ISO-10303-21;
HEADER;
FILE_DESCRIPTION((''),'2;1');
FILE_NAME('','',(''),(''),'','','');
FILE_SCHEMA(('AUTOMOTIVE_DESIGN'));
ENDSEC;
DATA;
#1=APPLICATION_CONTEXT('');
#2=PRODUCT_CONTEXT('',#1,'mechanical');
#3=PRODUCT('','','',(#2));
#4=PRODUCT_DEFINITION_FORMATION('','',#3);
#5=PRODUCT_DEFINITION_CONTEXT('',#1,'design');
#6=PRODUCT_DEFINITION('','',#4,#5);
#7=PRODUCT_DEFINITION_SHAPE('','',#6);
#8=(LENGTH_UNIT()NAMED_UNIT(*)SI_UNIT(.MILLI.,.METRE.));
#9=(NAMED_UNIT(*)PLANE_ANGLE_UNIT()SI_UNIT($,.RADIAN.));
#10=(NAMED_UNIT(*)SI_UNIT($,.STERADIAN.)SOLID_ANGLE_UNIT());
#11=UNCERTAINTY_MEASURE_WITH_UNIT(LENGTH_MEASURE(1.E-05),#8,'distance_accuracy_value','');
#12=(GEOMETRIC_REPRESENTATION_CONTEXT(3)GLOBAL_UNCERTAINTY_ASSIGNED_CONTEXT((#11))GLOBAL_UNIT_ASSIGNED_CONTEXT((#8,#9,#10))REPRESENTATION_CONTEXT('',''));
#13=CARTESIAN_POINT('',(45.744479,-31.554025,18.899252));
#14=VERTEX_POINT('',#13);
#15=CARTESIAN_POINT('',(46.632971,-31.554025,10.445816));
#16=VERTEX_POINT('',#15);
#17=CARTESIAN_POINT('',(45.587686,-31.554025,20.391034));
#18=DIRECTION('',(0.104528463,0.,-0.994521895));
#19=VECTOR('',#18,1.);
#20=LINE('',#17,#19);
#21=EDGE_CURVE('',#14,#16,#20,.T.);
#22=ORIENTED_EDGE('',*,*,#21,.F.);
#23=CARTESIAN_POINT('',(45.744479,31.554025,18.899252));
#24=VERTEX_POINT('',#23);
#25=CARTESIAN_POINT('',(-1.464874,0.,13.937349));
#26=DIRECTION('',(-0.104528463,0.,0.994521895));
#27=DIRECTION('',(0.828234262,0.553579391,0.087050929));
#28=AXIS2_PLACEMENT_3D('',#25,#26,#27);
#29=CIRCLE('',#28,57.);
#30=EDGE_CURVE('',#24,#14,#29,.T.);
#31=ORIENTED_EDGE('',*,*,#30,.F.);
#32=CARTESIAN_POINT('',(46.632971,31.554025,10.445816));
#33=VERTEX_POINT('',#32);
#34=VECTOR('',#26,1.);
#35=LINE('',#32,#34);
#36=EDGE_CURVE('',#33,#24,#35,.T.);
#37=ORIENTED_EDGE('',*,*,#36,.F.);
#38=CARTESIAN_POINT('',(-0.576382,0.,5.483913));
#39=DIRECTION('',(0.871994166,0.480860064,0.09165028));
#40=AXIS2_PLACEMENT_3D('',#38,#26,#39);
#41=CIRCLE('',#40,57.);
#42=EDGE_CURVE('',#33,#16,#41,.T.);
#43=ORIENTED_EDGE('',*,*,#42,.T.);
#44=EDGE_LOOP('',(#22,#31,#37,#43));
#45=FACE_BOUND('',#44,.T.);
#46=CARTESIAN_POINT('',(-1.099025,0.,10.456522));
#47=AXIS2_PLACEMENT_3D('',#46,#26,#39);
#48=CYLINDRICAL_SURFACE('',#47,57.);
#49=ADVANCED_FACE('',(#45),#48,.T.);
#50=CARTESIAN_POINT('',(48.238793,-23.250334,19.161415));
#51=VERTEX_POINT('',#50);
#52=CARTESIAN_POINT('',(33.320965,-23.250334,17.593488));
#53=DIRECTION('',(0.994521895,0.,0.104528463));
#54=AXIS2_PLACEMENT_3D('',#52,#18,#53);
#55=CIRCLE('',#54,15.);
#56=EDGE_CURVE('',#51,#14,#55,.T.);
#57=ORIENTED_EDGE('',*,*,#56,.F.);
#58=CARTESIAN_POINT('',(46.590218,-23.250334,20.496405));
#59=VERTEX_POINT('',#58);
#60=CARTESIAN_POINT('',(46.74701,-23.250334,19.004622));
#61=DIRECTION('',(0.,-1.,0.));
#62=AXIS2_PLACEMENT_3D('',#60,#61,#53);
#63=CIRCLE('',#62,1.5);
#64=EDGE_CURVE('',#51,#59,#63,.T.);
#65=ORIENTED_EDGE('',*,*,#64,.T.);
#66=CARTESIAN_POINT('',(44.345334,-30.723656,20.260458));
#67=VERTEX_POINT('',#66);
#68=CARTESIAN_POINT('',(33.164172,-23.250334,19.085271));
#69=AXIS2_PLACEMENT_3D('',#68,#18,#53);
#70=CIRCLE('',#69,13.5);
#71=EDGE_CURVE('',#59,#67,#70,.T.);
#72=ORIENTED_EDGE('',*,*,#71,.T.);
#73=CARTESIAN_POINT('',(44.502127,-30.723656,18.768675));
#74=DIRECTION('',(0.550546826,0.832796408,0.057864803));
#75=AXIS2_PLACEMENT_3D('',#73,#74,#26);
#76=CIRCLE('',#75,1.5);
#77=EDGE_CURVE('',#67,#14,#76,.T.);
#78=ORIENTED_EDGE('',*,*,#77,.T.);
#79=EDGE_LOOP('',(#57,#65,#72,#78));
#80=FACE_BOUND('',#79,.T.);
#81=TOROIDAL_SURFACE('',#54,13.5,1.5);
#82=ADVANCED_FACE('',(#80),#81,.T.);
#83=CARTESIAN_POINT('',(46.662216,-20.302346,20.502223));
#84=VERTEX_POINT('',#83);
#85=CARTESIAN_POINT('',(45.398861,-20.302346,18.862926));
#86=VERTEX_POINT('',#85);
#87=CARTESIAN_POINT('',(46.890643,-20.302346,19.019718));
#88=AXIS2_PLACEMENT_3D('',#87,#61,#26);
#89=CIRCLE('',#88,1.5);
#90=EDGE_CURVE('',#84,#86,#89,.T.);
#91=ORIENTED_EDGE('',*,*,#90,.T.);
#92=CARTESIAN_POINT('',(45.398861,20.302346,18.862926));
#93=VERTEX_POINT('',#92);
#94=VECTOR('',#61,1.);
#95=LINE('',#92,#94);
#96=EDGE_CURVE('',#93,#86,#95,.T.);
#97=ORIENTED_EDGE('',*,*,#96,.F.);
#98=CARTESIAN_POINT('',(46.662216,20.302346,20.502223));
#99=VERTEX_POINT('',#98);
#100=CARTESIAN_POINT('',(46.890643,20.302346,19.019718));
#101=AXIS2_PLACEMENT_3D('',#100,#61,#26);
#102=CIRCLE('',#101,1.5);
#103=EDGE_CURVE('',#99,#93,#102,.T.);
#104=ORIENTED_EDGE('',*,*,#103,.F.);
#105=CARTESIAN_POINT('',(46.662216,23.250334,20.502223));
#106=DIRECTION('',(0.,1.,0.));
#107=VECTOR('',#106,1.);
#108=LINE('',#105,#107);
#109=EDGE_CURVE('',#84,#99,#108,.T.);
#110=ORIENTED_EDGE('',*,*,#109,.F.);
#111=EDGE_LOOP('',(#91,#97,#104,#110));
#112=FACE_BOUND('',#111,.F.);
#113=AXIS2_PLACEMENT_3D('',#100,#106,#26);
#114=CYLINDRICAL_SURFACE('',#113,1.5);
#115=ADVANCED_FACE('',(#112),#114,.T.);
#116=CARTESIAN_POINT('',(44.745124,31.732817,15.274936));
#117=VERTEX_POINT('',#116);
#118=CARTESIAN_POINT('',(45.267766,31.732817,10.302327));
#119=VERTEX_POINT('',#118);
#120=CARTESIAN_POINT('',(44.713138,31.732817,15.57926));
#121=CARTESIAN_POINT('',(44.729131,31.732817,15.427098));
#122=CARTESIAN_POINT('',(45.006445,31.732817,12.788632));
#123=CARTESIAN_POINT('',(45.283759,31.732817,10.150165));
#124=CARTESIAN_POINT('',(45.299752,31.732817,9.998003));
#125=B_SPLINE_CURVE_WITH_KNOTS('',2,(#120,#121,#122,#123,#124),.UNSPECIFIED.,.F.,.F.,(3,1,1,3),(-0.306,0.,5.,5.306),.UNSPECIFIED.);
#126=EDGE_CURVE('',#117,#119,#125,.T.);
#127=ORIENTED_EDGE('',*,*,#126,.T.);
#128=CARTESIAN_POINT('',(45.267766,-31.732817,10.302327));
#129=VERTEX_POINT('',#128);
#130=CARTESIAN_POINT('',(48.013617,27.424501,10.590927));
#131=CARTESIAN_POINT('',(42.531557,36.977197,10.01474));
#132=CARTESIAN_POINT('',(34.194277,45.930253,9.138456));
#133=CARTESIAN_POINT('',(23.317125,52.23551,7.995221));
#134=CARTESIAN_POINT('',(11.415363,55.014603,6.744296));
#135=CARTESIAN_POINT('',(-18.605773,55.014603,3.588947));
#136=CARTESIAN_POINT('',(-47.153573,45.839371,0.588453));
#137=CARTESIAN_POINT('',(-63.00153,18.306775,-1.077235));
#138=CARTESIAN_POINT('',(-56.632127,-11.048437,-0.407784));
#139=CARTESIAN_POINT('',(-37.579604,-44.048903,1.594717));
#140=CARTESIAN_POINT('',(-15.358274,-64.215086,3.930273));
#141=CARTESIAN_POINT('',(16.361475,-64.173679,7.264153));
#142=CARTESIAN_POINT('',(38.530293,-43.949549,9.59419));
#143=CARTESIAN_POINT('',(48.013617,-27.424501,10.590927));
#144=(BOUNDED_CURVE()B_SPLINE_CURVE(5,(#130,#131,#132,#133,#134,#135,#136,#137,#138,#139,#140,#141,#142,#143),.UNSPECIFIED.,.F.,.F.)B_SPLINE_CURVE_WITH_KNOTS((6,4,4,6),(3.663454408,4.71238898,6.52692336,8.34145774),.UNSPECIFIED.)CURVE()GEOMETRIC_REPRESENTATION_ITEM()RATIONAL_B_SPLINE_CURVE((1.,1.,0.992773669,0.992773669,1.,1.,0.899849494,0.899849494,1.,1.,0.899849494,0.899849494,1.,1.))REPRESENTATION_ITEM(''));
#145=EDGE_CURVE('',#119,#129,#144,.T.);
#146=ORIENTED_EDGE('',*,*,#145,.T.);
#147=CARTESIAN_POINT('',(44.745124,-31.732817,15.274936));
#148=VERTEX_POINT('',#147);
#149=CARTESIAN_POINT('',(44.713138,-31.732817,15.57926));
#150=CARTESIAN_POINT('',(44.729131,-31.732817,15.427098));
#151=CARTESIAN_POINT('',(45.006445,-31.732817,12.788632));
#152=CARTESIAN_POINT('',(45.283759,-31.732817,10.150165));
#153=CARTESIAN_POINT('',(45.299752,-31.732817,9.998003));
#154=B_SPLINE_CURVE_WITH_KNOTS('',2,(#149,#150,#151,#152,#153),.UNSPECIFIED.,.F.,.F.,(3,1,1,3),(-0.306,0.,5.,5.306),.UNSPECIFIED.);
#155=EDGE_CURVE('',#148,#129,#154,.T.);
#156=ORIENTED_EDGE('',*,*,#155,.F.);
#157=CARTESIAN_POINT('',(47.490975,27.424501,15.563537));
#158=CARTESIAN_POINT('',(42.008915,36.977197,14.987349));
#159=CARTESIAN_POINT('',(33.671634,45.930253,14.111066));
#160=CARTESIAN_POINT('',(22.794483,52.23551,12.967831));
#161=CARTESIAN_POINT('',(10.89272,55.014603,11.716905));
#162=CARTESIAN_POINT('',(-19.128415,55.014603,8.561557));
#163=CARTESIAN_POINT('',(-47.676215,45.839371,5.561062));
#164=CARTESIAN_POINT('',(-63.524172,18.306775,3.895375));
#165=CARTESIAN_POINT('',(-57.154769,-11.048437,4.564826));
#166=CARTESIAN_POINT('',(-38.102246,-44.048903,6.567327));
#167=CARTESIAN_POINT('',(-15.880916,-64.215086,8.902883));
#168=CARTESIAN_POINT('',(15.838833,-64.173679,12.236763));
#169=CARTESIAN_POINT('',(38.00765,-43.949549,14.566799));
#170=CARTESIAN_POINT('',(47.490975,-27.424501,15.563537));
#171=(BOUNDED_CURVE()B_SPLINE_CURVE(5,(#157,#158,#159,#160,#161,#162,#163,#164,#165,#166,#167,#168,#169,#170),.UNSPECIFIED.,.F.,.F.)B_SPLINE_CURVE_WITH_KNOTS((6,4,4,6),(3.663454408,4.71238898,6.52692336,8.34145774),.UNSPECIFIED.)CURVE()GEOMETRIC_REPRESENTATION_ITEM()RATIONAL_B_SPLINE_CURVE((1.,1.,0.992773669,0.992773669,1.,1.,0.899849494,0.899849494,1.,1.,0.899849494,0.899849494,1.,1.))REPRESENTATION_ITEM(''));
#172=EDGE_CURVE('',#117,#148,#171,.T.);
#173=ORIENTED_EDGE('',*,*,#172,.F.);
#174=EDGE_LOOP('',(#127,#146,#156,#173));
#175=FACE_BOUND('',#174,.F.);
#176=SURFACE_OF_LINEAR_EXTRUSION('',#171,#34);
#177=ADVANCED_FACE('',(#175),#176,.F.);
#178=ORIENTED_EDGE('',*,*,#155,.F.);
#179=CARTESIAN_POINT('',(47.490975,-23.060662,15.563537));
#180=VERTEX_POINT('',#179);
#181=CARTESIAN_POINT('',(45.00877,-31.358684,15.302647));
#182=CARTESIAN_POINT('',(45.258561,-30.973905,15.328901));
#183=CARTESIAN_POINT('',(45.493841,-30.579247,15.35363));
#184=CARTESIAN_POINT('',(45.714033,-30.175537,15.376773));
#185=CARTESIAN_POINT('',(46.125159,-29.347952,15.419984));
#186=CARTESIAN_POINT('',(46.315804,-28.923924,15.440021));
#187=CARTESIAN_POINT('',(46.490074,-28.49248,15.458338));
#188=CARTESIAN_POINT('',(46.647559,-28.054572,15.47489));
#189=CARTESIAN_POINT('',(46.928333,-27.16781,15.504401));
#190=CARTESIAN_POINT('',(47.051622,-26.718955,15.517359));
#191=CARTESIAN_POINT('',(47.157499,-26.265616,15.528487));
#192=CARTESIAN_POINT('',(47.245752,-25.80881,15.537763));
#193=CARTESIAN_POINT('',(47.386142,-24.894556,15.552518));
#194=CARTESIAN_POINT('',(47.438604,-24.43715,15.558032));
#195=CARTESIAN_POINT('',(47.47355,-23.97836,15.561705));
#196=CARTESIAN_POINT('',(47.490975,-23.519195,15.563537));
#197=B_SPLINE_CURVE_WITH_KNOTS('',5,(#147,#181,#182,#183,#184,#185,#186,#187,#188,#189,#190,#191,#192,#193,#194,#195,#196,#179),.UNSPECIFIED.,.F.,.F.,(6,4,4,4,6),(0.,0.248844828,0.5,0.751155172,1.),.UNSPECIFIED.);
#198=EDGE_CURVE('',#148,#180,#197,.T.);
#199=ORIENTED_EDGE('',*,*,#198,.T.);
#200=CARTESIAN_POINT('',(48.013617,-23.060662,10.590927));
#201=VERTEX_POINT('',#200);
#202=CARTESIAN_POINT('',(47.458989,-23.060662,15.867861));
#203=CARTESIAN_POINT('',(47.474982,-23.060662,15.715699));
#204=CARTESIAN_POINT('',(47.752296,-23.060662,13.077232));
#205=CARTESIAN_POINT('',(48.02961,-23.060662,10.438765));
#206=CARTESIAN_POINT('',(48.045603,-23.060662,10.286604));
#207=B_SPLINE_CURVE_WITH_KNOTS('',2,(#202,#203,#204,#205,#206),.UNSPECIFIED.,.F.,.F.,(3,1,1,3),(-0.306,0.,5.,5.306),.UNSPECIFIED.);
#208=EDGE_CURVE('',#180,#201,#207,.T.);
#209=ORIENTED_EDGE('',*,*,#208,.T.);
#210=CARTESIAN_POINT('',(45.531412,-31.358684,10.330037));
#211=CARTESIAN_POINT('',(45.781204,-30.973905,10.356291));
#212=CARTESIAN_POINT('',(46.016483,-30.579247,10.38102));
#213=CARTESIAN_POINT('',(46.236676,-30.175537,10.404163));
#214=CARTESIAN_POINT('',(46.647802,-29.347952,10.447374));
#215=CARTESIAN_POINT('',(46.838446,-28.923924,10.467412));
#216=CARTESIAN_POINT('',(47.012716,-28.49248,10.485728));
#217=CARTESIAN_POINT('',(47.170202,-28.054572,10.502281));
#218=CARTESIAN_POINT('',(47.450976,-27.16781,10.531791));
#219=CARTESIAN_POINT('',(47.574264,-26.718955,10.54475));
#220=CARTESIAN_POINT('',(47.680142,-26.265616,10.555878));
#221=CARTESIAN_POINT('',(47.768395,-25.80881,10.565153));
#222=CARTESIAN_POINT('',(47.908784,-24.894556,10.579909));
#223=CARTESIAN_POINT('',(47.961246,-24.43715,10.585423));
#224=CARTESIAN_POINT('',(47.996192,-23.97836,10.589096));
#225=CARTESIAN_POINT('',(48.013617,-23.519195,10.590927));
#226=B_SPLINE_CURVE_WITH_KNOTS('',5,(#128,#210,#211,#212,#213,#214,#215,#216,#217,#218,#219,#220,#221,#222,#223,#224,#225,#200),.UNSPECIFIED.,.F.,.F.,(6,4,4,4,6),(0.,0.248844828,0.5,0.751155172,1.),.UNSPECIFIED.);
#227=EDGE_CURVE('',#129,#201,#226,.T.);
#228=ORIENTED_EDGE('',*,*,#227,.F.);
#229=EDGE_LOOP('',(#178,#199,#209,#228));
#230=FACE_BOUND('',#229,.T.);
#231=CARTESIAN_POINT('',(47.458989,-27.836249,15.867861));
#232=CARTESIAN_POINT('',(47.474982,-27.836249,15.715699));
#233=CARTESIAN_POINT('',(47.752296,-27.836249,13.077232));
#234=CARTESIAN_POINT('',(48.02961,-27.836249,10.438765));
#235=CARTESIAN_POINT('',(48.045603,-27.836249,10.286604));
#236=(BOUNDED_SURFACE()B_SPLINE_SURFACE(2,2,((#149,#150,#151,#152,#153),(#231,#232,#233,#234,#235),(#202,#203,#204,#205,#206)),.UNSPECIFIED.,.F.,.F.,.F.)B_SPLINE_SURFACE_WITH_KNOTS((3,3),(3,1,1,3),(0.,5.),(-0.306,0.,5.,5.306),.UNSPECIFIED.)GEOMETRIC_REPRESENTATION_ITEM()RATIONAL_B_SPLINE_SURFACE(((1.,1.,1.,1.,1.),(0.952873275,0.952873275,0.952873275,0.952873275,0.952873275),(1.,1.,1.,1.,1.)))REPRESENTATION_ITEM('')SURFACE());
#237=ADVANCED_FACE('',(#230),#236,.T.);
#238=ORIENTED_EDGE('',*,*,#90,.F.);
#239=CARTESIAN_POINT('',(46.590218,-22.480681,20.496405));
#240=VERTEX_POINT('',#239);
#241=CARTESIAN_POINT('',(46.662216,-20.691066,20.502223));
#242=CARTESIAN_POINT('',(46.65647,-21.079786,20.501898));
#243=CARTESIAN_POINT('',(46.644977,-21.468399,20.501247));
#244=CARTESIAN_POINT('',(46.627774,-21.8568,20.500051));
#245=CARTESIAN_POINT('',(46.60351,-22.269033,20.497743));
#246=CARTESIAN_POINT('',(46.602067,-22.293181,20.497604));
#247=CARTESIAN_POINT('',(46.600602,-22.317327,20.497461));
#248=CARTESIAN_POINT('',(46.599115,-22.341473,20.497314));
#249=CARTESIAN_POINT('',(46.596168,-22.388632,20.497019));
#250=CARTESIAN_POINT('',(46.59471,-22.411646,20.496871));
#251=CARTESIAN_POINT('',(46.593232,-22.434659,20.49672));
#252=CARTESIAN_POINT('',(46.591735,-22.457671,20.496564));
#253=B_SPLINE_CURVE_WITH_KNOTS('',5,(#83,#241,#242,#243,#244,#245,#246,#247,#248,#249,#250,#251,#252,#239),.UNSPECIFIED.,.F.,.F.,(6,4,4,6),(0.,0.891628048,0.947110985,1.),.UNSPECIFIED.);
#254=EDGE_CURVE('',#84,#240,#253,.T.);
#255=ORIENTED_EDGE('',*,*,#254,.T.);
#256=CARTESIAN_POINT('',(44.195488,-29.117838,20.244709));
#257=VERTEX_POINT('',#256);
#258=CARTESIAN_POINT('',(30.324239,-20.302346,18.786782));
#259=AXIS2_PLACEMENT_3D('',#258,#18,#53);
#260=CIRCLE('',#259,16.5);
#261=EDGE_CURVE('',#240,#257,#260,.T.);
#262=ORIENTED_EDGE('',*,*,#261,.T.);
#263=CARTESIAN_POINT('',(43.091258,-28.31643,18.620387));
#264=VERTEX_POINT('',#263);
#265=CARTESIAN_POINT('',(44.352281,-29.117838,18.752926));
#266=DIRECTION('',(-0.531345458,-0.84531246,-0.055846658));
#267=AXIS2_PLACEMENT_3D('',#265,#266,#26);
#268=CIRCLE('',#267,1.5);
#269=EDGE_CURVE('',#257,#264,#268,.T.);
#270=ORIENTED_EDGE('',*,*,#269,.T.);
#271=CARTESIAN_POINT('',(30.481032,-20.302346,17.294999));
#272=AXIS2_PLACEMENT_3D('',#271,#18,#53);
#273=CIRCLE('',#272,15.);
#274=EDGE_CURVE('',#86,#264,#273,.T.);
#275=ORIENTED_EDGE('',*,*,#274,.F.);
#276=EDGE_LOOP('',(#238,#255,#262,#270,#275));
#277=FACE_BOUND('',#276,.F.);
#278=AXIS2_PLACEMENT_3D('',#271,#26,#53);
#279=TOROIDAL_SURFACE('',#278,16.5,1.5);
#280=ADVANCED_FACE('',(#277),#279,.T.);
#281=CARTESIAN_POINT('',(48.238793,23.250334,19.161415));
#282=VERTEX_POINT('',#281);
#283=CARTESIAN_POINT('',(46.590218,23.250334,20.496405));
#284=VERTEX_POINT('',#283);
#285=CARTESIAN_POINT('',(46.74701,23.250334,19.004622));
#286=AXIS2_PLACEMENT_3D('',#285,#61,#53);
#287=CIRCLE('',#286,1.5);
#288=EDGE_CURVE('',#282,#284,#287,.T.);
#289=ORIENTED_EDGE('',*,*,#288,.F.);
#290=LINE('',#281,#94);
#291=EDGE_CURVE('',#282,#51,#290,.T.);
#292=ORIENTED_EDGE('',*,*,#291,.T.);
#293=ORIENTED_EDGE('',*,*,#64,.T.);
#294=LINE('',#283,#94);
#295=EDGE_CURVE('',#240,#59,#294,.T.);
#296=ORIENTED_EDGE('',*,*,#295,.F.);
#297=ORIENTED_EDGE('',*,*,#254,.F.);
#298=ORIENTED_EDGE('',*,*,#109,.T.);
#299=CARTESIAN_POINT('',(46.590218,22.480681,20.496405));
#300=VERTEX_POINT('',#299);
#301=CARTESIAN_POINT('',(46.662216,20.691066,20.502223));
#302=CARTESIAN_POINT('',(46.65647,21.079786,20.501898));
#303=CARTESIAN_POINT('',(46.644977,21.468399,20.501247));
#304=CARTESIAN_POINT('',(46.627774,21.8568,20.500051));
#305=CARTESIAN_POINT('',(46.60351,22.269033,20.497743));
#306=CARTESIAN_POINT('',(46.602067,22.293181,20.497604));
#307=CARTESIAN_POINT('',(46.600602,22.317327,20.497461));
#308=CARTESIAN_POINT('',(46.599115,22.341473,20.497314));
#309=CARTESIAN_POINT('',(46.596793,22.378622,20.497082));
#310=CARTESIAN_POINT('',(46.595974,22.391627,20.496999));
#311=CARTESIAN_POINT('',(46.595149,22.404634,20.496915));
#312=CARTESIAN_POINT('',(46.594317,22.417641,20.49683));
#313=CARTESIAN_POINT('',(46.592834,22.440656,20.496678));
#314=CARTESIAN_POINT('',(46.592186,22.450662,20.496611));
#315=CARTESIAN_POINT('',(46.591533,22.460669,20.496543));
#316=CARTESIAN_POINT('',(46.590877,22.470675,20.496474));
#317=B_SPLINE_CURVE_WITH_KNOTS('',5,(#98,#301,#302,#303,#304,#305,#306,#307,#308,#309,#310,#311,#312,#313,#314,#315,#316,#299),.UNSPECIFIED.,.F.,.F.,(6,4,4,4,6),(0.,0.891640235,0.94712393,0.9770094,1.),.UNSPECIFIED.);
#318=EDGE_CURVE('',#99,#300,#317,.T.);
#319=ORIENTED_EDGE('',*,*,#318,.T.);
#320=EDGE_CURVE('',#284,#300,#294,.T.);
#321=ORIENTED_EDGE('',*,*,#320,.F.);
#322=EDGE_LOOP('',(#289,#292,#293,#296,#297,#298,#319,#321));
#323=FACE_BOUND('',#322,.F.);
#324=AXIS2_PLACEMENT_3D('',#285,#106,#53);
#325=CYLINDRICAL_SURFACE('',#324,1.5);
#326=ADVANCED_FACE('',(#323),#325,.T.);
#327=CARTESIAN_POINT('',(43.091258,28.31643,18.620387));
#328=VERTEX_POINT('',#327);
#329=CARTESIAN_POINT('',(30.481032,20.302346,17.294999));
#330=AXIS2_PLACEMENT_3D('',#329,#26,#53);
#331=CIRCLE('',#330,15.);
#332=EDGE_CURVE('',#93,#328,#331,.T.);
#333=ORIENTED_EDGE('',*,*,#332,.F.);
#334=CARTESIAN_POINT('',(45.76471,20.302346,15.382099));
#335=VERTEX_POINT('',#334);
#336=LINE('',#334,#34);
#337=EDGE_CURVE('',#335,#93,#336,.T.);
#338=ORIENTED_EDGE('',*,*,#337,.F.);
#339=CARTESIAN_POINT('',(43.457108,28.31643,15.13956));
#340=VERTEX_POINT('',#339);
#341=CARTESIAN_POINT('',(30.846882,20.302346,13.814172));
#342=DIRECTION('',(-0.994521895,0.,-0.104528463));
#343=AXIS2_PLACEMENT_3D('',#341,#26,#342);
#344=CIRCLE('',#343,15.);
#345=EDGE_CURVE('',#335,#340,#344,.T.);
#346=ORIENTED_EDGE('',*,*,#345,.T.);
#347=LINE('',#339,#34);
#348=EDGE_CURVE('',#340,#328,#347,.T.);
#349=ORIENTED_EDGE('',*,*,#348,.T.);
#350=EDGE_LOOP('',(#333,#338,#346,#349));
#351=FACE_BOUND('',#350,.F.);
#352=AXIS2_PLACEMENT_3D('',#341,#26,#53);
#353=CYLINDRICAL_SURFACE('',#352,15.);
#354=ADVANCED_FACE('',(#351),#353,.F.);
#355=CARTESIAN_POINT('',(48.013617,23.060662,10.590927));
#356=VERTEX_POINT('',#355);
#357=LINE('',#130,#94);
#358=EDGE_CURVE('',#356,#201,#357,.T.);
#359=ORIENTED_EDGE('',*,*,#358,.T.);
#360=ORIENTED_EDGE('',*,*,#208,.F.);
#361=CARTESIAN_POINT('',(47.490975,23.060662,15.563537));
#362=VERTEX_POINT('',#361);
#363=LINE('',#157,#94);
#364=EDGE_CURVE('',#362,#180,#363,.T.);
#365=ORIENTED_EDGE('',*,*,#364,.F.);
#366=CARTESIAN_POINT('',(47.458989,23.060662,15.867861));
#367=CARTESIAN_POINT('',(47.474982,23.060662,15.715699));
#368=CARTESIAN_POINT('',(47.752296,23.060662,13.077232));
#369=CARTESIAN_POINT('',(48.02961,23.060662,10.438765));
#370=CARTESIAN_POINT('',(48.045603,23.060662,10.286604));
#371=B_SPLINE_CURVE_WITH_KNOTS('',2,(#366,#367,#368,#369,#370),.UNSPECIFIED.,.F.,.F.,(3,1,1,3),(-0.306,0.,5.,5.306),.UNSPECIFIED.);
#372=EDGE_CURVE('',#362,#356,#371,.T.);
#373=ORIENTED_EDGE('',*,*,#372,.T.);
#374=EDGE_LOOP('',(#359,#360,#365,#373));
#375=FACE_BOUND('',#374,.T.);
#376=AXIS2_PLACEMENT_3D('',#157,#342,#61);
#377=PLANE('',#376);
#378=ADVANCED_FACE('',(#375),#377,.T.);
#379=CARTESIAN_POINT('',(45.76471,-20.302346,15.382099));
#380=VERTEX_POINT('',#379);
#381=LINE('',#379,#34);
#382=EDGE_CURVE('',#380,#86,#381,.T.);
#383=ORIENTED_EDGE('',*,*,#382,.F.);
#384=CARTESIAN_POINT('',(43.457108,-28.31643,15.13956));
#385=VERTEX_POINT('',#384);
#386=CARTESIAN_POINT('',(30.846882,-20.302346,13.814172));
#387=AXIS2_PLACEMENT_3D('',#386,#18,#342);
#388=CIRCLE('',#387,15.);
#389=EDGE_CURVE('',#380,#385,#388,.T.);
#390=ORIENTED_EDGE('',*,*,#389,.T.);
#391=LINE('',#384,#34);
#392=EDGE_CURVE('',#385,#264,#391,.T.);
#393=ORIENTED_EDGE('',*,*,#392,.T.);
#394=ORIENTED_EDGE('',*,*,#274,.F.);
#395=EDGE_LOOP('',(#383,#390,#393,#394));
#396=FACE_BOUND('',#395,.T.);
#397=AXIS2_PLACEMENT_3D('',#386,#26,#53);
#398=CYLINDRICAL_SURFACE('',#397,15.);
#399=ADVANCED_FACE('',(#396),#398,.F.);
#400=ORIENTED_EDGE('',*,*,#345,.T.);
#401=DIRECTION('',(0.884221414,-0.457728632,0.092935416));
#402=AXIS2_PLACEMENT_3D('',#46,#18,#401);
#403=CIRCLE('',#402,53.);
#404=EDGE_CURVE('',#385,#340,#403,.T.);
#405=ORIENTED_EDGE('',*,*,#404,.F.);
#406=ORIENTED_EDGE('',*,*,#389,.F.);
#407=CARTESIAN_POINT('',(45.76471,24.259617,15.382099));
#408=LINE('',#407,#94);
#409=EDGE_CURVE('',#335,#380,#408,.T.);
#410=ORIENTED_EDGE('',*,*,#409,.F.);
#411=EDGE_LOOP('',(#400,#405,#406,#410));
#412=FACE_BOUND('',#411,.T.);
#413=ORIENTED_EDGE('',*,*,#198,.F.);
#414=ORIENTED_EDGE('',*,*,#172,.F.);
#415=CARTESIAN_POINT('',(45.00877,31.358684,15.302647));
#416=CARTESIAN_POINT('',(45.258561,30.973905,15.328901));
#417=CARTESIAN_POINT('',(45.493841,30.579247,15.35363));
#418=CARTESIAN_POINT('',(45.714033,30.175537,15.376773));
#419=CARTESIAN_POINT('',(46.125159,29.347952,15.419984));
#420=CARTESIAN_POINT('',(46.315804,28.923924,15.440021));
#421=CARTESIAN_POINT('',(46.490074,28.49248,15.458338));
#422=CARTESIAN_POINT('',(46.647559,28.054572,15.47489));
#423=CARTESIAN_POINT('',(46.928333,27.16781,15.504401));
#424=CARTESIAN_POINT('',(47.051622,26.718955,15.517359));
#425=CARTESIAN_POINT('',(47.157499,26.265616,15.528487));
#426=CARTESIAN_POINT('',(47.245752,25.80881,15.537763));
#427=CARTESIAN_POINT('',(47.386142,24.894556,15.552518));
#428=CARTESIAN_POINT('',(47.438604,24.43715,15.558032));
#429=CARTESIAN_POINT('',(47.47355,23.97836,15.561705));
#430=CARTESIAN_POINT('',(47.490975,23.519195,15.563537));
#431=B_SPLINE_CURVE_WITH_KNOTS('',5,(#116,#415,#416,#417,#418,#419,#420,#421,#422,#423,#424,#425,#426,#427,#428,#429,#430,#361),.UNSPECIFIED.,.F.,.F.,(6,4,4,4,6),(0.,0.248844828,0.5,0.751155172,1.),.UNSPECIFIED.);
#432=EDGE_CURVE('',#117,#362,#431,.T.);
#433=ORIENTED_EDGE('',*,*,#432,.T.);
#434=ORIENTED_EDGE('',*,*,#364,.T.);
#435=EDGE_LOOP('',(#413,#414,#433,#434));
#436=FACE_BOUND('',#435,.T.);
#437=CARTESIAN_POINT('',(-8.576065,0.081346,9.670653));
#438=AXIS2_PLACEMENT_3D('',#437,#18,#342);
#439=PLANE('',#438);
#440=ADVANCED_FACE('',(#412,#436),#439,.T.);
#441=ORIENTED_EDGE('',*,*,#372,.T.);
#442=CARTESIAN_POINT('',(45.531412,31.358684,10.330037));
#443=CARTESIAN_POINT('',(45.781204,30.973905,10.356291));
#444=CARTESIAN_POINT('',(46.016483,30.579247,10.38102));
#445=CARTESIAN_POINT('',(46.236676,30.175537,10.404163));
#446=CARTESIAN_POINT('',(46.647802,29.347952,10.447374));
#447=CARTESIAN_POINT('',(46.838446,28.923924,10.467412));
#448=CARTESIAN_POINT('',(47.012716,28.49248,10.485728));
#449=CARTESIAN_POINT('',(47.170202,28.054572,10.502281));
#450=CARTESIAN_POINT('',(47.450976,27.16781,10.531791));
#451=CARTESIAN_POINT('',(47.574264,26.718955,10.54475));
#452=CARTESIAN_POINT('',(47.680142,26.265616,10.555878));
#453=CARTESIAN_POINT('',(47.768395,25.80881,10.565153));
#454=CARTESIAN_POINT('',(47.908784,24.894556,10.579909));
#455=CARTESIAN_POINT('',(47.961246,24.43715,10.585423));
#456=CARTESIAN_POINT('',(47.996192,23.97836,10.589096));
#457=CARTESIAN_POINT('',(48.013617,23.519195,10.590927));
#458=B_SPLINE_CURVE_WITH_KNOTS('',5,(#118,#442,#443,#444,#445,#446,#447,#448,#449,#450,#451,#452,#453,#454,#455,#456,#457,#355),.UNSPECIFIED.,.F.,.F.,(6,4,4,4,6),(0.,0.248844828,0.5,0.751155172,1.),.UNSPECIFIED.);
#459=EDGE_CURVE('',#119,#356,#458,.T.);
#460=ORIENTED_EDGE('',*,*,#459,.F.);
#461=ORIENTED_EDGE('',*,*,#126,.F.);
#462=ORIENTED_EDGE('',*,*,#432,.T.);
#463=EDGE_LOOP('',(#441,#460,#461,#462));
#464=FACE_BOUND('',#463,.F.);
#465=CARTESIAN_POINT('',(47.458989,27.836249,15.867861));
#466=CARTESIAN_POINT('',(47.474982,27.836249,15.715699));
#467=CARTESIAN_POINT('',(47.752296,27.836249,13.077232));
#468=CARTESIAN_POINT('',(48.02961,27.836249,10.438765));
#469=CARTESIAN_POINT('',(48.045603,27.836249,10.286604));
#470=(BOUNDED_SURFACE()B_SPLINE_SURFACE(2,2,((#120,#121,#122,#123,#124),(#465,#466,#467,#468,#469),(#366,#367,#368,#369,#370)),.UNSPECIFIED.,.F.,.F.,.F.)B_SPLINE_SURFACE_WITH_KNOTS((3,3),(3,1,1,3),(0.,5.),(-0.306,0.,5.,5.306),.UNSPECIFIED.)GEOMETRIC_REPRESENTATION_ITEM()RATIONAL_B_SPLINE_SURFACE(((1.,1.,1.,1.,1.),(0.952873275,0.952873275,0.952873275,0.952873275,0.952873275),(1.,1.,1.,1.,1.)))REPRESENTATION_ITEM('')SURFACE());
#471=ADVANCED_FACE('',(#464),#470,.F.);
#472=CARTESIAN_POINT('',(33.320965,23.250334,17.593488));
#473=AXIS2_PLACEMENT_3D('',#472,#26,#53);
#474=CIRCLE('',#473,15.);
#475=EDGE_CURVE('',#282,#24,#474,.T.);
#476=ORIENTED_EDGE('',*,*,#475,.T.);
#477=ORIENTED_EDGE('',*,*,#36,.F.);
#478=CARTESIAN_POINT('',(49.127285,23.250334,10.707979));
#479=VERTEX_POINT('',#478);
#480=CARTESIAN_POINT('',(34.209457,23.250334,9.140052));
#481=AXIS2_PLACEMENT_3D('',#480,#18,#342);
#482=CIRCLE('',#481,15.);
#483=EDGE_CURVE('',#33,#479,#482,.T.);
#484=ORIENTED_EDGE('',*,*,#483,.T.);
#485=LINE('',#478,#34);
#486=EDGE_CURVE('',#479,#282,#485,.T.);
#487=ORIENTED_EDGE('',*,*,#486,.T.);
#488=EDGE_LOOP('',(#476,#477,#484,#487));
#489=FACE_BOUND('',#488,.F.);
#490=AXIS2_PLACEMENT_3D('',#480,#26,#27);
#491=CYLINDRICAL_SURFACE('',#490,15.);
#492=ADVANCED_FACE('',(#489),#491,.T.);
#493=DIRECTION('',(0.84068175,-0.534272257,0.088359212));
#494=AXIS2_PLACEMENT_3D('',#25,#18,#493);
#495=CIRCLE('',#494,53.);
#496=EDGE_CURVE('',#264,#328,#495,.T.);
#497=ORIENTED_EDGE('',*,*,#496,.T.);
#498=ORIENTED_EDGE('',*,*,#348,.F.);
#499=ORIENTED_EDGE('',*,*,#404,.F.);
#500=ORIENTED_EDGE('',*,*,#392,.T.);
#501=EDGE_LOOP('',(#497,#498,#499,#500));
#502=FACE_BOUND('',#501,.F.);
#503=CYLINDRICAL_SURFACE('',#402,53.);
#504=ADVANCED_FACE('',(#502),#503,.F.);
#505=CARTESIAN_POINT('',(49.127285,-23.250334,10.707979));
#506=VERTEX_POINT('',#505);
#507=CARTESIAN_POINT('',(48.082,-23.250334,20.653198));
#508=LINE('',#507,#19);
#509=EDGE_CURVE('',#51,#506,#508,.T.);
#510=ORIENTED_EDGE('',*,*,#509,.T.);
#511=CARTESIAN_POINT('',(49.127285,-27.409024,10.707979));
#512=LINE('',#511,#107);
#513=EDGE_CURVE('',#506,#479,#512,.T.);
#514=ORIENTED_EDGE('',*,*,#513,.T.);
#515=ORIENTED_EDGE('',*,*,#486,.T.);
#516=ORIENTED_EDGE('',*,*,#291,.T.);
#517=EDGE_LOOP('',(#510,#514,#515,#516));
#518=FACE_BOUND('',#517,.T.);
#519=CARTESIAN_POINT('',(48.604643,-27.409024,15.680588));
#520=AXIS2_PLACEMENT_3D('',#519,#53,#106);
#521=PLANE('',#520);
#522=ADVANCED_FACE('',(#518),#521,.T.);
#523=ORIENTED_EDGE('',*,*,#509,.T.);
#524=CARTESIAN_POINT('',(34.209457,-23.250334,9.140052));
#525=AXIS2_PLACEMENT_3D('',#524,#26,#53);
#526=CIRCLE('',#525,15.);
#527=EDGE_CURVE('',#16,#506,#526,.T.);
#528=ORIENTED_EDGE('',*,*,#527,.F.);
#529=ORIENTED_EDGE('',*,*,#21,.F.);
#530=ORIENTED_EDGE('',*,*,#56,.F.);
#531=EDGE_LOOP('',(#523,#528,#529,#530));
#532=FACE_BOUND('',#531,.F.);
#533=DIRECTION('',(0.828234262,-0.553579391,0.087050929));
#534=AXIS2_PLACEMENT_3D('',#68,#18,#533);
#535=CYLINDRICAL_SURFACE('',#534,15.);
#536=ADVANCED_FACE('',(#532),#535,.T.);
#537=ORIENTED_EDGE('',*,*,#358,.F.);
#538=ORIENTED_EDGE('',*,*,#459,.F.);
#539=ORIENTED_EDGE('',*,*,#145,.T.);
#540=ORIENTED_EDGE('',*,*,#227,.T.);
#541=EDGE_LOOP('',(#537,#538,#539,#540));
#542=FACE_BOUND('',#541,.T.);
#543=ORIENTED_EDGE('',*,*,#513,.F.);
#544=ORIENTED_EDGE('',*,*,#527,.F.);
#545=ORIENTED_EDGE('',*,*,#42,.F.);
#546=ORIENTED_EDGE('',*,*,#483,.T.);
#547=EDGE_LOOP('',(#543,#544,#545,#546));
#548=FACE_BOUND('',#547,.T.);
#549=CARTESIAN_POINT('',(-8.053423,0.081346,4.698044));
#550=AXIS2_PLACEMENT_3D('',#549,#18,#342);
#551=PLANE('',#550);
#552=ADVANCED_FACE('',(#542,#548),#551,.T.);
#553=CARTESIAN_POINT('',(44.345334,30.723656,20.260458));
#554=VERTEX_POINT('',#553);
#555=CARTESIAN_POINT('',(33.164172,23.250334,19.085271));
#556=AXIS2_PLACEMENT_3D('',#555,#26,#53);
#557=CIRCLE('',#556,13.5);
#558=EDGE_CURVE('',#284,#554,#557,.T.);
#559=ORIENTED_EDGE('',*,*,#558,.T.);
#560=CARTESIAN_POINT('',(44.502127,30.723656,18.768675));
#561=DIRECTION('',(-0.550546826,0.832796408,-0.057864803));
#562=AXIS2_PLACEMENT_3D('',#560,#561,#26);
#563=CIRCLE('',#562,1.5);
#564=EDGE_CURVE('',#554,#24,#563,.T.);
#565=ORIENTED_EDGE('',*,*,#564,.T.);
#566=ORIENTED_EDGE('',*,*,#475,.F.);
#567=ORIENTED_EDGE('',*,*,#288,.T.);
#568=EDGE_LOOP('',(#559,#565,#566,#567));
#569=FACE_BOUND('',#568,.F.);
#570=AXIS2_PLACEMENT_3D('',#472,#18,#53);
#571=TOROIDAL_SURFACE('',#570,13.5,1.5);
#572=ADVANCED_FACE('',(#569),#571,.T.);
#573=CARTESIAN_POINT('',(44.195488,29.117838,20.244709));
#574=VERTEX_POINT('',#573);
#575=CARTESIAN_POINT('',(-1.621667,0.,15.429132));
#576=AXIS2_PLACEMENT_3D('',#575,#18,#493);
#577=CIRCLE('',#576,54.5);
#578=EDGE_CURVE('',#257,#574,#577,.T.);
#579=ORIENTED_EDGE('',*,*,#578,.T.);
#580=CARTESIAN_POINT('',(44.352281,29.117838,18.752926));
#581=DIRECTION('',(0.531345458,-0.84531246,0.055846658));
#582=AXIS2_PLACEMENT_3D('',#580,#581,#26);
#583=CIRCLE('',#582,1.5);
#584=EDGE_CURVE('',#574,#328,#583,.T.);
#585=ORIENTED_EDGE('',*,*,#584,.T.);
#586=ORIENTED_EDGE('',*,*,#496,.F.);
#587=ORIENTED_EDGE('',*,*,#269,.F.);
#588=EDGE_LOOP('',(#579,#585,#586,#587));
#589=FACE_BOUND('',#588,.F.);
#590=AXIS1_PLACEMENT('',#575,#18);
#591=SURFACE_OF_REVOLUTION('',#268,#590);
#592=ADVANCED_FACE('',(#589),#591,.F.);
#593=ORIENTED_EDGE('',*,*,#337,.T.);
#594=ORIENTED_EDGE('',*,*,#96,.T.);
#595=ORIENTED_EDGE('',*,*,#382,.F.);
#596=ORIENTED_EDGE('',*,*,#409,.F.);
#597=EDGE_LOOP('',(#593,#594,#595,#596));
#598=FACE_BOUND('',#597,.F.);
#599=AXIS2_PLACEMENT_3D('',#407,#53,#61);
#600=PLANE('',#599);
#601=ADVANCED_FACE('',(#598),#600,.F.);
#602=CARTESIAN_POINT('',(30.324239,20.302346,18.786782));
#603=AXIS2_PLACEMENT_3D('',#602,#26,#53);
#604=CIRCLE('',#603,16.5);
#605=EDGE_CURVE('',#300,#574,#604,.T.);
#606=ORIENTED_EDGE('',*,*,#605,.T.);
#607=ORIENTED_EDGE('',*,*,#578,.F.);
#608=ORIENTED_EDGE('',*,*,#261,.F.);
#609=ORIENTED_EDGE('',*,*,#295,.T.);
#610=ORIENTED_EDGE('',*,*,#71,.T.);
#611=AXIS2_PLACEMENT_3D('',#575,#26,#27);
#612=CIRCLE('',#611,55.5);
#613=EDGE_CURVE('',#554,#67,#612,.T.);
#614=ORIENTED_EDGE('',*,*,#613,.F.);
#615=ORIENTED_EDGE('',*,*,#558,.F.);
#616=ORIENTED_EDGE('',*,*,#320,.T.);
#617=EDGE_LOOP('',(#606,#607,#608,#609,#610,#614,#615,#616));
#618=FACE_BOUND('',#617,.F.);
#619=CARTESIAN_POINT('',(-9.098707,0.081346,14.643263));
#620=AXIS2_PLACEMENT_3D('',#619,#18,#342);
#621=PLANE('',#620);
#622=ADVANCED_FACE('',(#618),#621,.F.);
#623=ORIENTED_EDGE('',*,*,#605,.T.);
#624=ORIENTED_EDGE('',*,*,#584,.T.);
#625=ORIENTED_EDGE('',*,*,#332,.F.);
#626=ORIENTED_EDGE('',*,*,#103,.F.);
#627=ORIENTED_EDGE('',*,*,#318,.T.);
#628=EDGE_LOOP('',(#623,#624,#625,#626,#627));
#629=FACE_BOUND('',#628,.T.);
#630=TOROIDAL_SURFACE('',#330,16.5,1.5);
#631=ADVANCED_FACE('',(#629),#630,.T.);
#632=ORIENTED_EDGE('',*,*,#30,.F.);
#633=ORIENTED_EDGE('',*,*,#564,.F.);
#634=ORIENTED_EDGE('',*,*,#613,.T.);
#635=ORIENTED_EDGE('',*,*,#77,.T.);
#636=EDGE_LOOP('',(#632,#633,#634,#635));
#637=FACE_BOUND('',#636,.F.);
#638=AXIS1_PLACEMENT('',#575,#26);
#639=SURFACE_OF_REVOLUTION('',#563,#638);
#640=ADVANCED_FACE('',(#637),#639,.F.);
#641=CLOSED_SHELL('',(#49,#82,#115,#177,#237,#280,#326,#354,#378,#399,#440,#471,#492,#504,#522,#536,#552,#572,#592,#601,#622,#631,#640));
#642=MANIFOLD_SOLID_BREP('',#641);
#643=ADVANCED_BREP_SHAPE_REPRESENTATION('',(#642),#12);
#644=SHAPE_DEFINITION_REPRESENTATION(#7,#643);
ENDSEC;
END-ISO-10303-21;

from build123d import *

# Parameters (mm, degrees)
F3_DEPTH     = 5
F4_DEPTH     = 5
F5_R         = 15
F6_T1_DEPTH  = 46.5006688801
F6_T3_DEPTH  = 40.6046915678
F6_T6_ANGLE  = 292.774155129
F6_T8_ANGLE  = 295.4108576805
F6_T10_ANGLE = 33.6129224355
F6_T12_ANGLE = 33.6129224355
F6_T14_ANGLE = 32.2945711597
F6_T16_ANGLE = 32.2945711597


# Not quite as in the source:
# - a fillet or chamfer that OpenCascade refuses, or shapes differently, is made with other operations: its cross-section is extruded or revolved along the edge and cut away or added


with BuildPart() as f3:
    # F2 (on line) → F3 (new body)
    with BuildSketch(Plane(origin=(-1.0990247565, 0, 10.4565220775), x_dir=(0.9945218954, 0, 0.1045284633), z_dir=(-0.1045284633, 0, 0.9945218954))):
        with BuildLine():
            add(Edge.make_bspline(
                [(48.8576467338, 27.4245012731), (32.937142649, 55.0146028399), (1, 55.0146028399)],
                knots=[3.6634544085, 3.6634544085, 3.6634544085, 4.7123889804, 4.7123889804, 4.7123889804], degree=2, weights=[1, 0.865590822, 1]))
            add(Edge.make_bspline(
                [(49.9774491412, 25.3853808752), (49.4391671103, 26.4167312826), (48.8576467338, 27.4245012731)],
                knots=[3.6211988828, 3.6211988828, 3.6211988828, 3.6634544085, 3.6634544085, 3.6634544085], degree=2, weights=[1, 0.9997768171, 1]))
            Line((49.9774491412, 25.3853808752), (49.9774491412, 27.409023648))
            ThreePointArc((49.9774491412, 27.409023648), (-57, 0), (49.9774491412, -27.409023648))
            Line((49.9774491412, -27.409023648), (49.9774491412, -25.3853808752))
            add(Edge.make_bspline(
                [(48.8576467338, -27.4245012731), (49.4391671103, -26.4167312826), (49.9774491412, -25.3853808752)],
                knots=[2.6197308987, 2.6197308987, 2.6197308987, 2.6619864244, 2.6619864244, 2.6619864244], degree=2, weights=[1, 0.9997768171, 1]))
            add(Edge.make_bspline(
                [(1, 55.0146028399), (-94.7155099565, 55.0146028399), (-46.785780422, -27.5486703855), (1.1439491125, -110.1119436109), (48.8576467338, -27.4245012731)],
                knots=[4.7123889804, 4.7123889804, 4.7123889804, 6.8076525931, 6.8076525931, 8.9029162059, 8.9029162059, 8.9029162059], degree=2, weights=[1, 0.4996238769, 1, 0.4996238769, 1]))
        make_face()
        with BuildLine():
            ThreePointArc((47.121873477, -24.2596174747), (-53, 0), (47.121873477, 24.2596174747))
            ThreePointArc((47.121873477, 24.2596174747), (48.0257660969, 22.4170870276), (48.8576467338, 20.540943397))
            Line((48.8576467338, 20.540943397), (48.8576467338, 27.4245012731))
            add(Edge.make_bspline(
                [(48.8576467338, 27.4245012731), (32.937142649, 55.0146028399), (1, 55.0146028399)],
                knots=[3.6634544085, 3.6634544085, 3.6634544085, 4.7123889804, 4.7123889804, 4.7123889804], degree=2, weights=[1, 0.865590822, 1]))
            add(Edge.make_bspline(
                [(1, 55.0146028399), (-94.7155099565, 55.0146028399), (-46.785780422, -27.5486703855), (1.1439491125, -110.1119436109), (48.8576467338, -27.4245012731)],
                knots=[4.7123889804, 4.7123889804, 4.7123889804, 6.8076525931, 6.8076525931, 8.9029162059, 8.9029162059, 8.9029162059], degree=2, weights=[1, 0.4996238769, 1, 0.4996238769, 1]))
            Line((48.8576467338, -27.4245012731), (48.8576467338, -20.540943397))
            ThreePointArc((48.8576467338, -20.540943397), (48.0257660969, -22.4170870276), (47.121873477, -24.2596174747))
        make_face()
        with BuildLine():
            ThreePointArc((48.8576467338, 20.540943397), (48.0257660969, 22.4170870276), (47.121873477, 24.2596174747))
            Line((47.121873477, 24.2596174747), (47.121873477, -24.2596174747))
            ThreePointArc((47.121873477, -24.2596174747), (48.0257660969, -22.4170870276), (48.8576467338, -20.540943397))
            Line((48.8576467338, -20.540943397), (48.8576467338, 20.540943397))
        make_face()
        with BuildLine():
            ThreePointArc((49.9774491412, 17.6424084902), (49.4387946891, 19.0998842848), (48.8576467338, 20.540943397))
            Line((48.8576467338, 20.540943397), (48.8576467338, -20.540943397))
            ThreePointArc((48.8576467338, -20.540943397), (49.4387946891, -19.0998842848), (49.9774491412, -17.6424084902))
            Line((49.9774491412, -17.6424084902), (49.9774491412, 17.6424084902))
        make_face()
        with BuildLine():
            Line((48.8576467338, 27.4245012731), (48.8576467338, 20.540943397))
            ThreePointArc((48.8576467338, 20.540943397), (49.4387946891, 19.0998842848), (49.9774491412, 17.6424084902))
            Line((49.9774491412, 17.6424084902), (49.9774491412, 25.3853808752))
            add(Edge.make_bspline(
                [(49.9774491412, 25.3853808752), (49.4391671103, 26.4167312826), (48.8576467338, 27.4245012731)],
                knots=[3.6211988828, 3.6211988828, 3.6211988828, 3.6634544085, 3.6634544085, 3.6634544085], degree=2, weights=[1, 0.9997768171, 1]))
        make_face()
        with BuildLine():
            ThreePointArc((49.9774491412, -17.6424084902), (49.4387946891, -19.0998842848), (48.8576467338, -20.540943397))
            Line((48.8576467338, -20.540943397), (48.8576467338, -27.4245012731))
            add(Edge.make_bspline(
                [(48.8576467338, -27.4245012731), (49.4391671103, -26.4167312826), (49.9774491412, -25.3853808752)],
                knots=[2.6197308987, 2.6197308987, 2.6197308987, 2.6619864244, 2.6619864244, 2.6619864244], degree=2, weights=[1, 0.9997768171, 1]))
            Line((49.9774491412, -25.3853808752), (49.9774491412, -17.6424084902))
        make_face()
    extrude(amount=F3_DEPTH)

    # F2 (on line) → F4 (join)
    with BuildSketch(Plane(origin=(-1.0990247565, 0, 10.4565220775), x_dir=(0.9945218954, 0, 0.1045284633), z_dir=(-0.1045284633, 0, 0.9945218954))):
        with BuildLine():
            add(Edge.make_bspline(
                [(48.8576467338, 27.4245012731), (32.937142649, 55.0146028399), (1, 55.0146028399)],
                knots=[3.6634544085, 3.6634544085, 3.6634544085, 4.7123889804, 4.7123889804, 4.7123889804], degree=2, weights=[1, 0.865590822, 1]))
            add(Edge.make_bspline(
                [(49.9774491412, 25.3853808752), (49.4391671103, 26.4167312826), (48.8576467338, 27.4245012731)],
                knots=[3.6211988828, 3.6211988828, 3.6211988828, 3.6634544085, 3.6634544085, 3.6634544085], degree=2, weights=[1, 0.9997768171, 1]))
            Line((49.9774491412, 25.3853808752), (49.9774491412, 27.409023648))
            ThreePointArc((49.9774491412, 27.409023648), (-57, 0), (49.9774491412, -27.409023648))
            Line((49.9774491412, -27.409023648), (49.9774491412, -25.3853808752))
            add(Edge.make_bspline(
                [(48.8576467338, -27.4245012731), (49.4391671103, -26.4167312826), (49.9774491412, -25.3853808752)],
                knots=[2.6197308987, 2.6197308987, 2.6197308987, 2.6619864244, 2.6619864244, 2.6619864244], degree=2, weights=[1, 0.9997768171, 1]))
            add(Edge.make_bspline(
                [(1, 55.0146028399), (-94.7155099565, 55.0146028399), (-46.785780422, -27.5486703855), (1.1439491125, -110.1119436109), (48.8576467338, -27.4245012731)],
                knots=[4.7123889804, 4.7123889804, 4.7123889804, 6.8076525931, 6.8076525931, 8.9029162059, 8.9029162059, 8.9029162059], degree=2, weights=[1, 0.4996238769, 1, 0.4996238769, 1]))
        make_face()
        with BuildLine():
            ThreePointArc((49.9774491412, -17.6424084902), (49.4387946891, -19.0998842848), (48.8576467338, -20.540943397))
            Line((48.8576467338, -20.540943397), (48.8576467338, -27.4245012731))
            add(Edge.make_bspline(
                [(48.8576467338, -27.4245012731), (49.4391671103, -26.4167312826), (49.9774491412, -25.3853808752)],
                knots=[2.6197308987, 2.6197308987, 2.6197308987, 2.6619864244, 2.6619864244, 2.6619864244], degree=2, weights=[1, 0.9997768171, 1]))
            Line((49.9774491412, -25.3853808752), (49.9774491412, -17.6424084902))
        make_face()
        with BuildLine():
            Line((48.8576467338, 27.4245012731), (48.8576467338, 20.540943397))
            ThreePointArc((48.8576467338, 20.540943397), (49.4387946891, 19.0998842848), (49.9774491412, 17.6424084902))
            Line((49.9774491412, 17.6424084902), (49.9774491412, 25.3853808752))
            add(Edge.make_bspline(
                [(49.9774491412, 25.3853808752), (49.4391671103, 26.4167312826), (48.8576467338, 27.4245012731)],
                knots=[3.6211988828, 3.6211988828, 3.6211988828, 3.6634544085, 3.6634544085, 3.6634544085], degree=2, weights=[1, 0.9997768171, 1]))
        make_face()
        with BuildLine():
            ThreePointArc((49.9774491412, 17.6424084902), (49.4387946891, 19.0998842848), (48.8576467338, 20.540943397))
            Line((48.8576467338, 20.540943397), (48.8576467338, -20.540943397))
            ThreePointArc((48.8576467338, -20.540943397), (49.4387946891, -19.0998842848), (49.9774491412, -17.6424084902))
            Line((49.9774491412, -17.6424084902), (49.9774491412, 17.6424084902))
        make_face()
    extrude(amount=-F4_DEPTH)

    # F5
    f5_edges = [f3.edges().sort_by_distance(p)[0] for p in [
        (45.503389, 24.259617, 17.868404),
        (47.752296, 27.424501, 13.077232),
        (48.604643, -27.409024, 15.680588),
        (48.604643, 27.409024, 15.680588),
        (47.752296, -27.424501, 13.077232),
        (45.503389, -24.259617, 17.868404),
    ]]
    fillet(f5_edges, radius=F5_R)

    # F6: fillet of radius 1.5 on 8 edges, made by hand

    # F6_s2 → F6_t1 (cut)
    with BuildSketch(Plane.XZ.offset(-23.25033444)):
        with BuildLine():
            ThreePointArc((48.2387930677, 19.161414668), (47.6909908112, 20.1703409153), (46.5902175297, 20.4964048162))
            Line((46.5902175297, 20.4964048162), (48.0820003728, 20.6531975111))
            Line((48.0820003728, 20.6531975111), (48.2387930677, 19.161414668))
        make_face()
    extrude(amount=F6_T1_DEPTH, mode=Mode.SUBTRACT)

    # F6_s4 → F6_t3 (cut)
    with BuildSketch(Plane.XZ.offset(-20.3023457839)):
        with BuildLine():
            ThreePointArc((46.7338506938, 20.5115012701), (45.7249244466, 19.9636990136), (45.3988605457, 18.8629257321))
            Line((45.3988605457, 18.8629257321), (45.2420678508, 20.3547085752))
            Line((45.2420678508, 20.3547085752), (46.7338506938, 20.5115012701))
        make_face()
    extrude(amount=F6_T3_DEPTH, mode=Mode.SUBTRACT)

    # F6_s5 → F6_t6 (revolve, cut)
    with BuildSketch(Plane(origin=(0, 0, 0), x_dir=(0.8341941601, 0.5514708544, 0), z_dir=(0.5505468256, -0.8327964081, 0.0578648031))):
        with BuildLine():
            ThreePointArc((53.9358200017, 20.2944629237), (55.0307493385, 19.9492829243), (55.5609021792, 18.930971847))
            Line((55.5609021792, 18.930971847), (55.4301066288, 20.4252584742))
            Line((55.4301066288, 20.4252584742), (53.9358200017, 20.2944629237))
        make_face()
    revolve(axis=Axis((-1.6216670728, 0, 15.4291315543), (-0.1045284633, 0, 0.9945218954)), revolution_arc=F6_T6_ANGLE, mode=Mode.SUBTRACT)

    # F6_s7 → F6_t8 (revolve, cut)
    with BuildSketch(Plane(origin=(0, 0, 0), x_dir=(-0.8466337525, 0.5321759946, 0), z_dir=(0.5313454581, 0.8453124599, 0.055846658))):
        with BuildLine():
            ThreePointArc((-52.9132065092, 20.2763527671), (-51.8955883279, 19.7448711382), (-51.5518378751, 18.6494921577))
            Line((-51.5518378751, 18.6494921577), (-51.4190918875, 20.1436067794))
            Line((-51.4190918875, 20.1436067794), (-52.9132065092, 20.2763527671))
        make_face()
    revolve(axis=Axis((-1.6216670728, 0, 15.4291315543), (0.1045284633, 0, -0.9945218954)), revolution_arc=F6_T8_ANGLE, mode=Mode.SUBTRACT)

    # F6_s9 → F6_t10 (revolve, cut)
    with BuildSketch(Plane.XZ.offset(23.25033444)):
        with BuildLine():
            ThreePointArc((46.5902175297, 20.4964048162), (47.6909908112, 20.1703409153), (48.2387930677, 19.161414668))
            Line((48.2387930677, 19.161414668), (48.0820003728, 20.6531975111))
            Line((48.0820003728, 20.6531975111), (46.5902175297, 20.4964048162))
        make_face()
    revolve(axis=Axis((33.1641719422, -23.25033444, 19.0852705621), (0.1045284633, 0, -0.9945218954)), revolution_arc=F6_T10_ANGLE, mode=Mode.SUBTRACT)

    # F6_s11 → F6_t12 (revolve, cut)
    with BuildSketch(Plane.XZ.offset(-23.25033444)):
        with BuildLine():
            ThreePointArc((46.5902175297, 20.4964048162), (47.6909908112, 20.1703409153), (48.2387930677, 19.161414668))
            Line((48.2387930677, 19.161414668), (48.0820003728, 20.6531975111))
            Line((48.0820003728, 20.6531975111), (46.5902175297, 20.4964048162))
        make_face()
    revolve(axis=Axis((33.1641719422, 23.25033444, 19.0852705621), (-0.1045284633, 0, 0.9945218954)), revolution_arc=F6_T12_ANGLE, mode=Mode.SUBTRACT)

    # F6_s13 → F6_t14 (revolve, cut)
    with BuildSketch(Plane.XZ.offset(20.3023457839)):
        with BuildLine():
            ThreePointArc((46.7338506938, 20.5115012701), (45.7249244466, 19.9636990136), (45.3988605457, 18.8629257321))
            Line((45.3988605457, 18.8629257321), (45.2420678508, 20.3547085752))
            Line((45.2420678508, 20.3547085752), (46.7338506938, 20.5115012701))
        make_face()
    revolve(axis=Axis((30.3242394203, -20.3023457839, 18.7867816262), (0.1045284633, 0, -0.9945218954)), revolution_arc=F6_T14_ANGLE, mode=Mode.SUBTRACT)

    # F6_s15 → F6_t16 (revolve, cut)
    with BuildSketch(Plane.XZ.offset(-20.3023457839)):
        with BuildLine():
            ThreePointArc((46.7338506938, 20.5115012701), (45.7249244466, 19.9636990136), (45.3988605457, 18.8629257321))
            Line((45.3988605457, 18.8629257321), (45.2420678508, 20.3547085752))
            Line((45.2420678508, 20.3547085752), (46.7338506938, 20.5115012701))
        make_face()
    revolve(axis=Axis((30.3242394203, 20.3023457839, 18.7867816262), (-0.1045284633, 0, 0.9945218954)), revolution_arc=F6_T16_ANGLE, mode=Mode.SUBTRACT)


solid = f3.part
